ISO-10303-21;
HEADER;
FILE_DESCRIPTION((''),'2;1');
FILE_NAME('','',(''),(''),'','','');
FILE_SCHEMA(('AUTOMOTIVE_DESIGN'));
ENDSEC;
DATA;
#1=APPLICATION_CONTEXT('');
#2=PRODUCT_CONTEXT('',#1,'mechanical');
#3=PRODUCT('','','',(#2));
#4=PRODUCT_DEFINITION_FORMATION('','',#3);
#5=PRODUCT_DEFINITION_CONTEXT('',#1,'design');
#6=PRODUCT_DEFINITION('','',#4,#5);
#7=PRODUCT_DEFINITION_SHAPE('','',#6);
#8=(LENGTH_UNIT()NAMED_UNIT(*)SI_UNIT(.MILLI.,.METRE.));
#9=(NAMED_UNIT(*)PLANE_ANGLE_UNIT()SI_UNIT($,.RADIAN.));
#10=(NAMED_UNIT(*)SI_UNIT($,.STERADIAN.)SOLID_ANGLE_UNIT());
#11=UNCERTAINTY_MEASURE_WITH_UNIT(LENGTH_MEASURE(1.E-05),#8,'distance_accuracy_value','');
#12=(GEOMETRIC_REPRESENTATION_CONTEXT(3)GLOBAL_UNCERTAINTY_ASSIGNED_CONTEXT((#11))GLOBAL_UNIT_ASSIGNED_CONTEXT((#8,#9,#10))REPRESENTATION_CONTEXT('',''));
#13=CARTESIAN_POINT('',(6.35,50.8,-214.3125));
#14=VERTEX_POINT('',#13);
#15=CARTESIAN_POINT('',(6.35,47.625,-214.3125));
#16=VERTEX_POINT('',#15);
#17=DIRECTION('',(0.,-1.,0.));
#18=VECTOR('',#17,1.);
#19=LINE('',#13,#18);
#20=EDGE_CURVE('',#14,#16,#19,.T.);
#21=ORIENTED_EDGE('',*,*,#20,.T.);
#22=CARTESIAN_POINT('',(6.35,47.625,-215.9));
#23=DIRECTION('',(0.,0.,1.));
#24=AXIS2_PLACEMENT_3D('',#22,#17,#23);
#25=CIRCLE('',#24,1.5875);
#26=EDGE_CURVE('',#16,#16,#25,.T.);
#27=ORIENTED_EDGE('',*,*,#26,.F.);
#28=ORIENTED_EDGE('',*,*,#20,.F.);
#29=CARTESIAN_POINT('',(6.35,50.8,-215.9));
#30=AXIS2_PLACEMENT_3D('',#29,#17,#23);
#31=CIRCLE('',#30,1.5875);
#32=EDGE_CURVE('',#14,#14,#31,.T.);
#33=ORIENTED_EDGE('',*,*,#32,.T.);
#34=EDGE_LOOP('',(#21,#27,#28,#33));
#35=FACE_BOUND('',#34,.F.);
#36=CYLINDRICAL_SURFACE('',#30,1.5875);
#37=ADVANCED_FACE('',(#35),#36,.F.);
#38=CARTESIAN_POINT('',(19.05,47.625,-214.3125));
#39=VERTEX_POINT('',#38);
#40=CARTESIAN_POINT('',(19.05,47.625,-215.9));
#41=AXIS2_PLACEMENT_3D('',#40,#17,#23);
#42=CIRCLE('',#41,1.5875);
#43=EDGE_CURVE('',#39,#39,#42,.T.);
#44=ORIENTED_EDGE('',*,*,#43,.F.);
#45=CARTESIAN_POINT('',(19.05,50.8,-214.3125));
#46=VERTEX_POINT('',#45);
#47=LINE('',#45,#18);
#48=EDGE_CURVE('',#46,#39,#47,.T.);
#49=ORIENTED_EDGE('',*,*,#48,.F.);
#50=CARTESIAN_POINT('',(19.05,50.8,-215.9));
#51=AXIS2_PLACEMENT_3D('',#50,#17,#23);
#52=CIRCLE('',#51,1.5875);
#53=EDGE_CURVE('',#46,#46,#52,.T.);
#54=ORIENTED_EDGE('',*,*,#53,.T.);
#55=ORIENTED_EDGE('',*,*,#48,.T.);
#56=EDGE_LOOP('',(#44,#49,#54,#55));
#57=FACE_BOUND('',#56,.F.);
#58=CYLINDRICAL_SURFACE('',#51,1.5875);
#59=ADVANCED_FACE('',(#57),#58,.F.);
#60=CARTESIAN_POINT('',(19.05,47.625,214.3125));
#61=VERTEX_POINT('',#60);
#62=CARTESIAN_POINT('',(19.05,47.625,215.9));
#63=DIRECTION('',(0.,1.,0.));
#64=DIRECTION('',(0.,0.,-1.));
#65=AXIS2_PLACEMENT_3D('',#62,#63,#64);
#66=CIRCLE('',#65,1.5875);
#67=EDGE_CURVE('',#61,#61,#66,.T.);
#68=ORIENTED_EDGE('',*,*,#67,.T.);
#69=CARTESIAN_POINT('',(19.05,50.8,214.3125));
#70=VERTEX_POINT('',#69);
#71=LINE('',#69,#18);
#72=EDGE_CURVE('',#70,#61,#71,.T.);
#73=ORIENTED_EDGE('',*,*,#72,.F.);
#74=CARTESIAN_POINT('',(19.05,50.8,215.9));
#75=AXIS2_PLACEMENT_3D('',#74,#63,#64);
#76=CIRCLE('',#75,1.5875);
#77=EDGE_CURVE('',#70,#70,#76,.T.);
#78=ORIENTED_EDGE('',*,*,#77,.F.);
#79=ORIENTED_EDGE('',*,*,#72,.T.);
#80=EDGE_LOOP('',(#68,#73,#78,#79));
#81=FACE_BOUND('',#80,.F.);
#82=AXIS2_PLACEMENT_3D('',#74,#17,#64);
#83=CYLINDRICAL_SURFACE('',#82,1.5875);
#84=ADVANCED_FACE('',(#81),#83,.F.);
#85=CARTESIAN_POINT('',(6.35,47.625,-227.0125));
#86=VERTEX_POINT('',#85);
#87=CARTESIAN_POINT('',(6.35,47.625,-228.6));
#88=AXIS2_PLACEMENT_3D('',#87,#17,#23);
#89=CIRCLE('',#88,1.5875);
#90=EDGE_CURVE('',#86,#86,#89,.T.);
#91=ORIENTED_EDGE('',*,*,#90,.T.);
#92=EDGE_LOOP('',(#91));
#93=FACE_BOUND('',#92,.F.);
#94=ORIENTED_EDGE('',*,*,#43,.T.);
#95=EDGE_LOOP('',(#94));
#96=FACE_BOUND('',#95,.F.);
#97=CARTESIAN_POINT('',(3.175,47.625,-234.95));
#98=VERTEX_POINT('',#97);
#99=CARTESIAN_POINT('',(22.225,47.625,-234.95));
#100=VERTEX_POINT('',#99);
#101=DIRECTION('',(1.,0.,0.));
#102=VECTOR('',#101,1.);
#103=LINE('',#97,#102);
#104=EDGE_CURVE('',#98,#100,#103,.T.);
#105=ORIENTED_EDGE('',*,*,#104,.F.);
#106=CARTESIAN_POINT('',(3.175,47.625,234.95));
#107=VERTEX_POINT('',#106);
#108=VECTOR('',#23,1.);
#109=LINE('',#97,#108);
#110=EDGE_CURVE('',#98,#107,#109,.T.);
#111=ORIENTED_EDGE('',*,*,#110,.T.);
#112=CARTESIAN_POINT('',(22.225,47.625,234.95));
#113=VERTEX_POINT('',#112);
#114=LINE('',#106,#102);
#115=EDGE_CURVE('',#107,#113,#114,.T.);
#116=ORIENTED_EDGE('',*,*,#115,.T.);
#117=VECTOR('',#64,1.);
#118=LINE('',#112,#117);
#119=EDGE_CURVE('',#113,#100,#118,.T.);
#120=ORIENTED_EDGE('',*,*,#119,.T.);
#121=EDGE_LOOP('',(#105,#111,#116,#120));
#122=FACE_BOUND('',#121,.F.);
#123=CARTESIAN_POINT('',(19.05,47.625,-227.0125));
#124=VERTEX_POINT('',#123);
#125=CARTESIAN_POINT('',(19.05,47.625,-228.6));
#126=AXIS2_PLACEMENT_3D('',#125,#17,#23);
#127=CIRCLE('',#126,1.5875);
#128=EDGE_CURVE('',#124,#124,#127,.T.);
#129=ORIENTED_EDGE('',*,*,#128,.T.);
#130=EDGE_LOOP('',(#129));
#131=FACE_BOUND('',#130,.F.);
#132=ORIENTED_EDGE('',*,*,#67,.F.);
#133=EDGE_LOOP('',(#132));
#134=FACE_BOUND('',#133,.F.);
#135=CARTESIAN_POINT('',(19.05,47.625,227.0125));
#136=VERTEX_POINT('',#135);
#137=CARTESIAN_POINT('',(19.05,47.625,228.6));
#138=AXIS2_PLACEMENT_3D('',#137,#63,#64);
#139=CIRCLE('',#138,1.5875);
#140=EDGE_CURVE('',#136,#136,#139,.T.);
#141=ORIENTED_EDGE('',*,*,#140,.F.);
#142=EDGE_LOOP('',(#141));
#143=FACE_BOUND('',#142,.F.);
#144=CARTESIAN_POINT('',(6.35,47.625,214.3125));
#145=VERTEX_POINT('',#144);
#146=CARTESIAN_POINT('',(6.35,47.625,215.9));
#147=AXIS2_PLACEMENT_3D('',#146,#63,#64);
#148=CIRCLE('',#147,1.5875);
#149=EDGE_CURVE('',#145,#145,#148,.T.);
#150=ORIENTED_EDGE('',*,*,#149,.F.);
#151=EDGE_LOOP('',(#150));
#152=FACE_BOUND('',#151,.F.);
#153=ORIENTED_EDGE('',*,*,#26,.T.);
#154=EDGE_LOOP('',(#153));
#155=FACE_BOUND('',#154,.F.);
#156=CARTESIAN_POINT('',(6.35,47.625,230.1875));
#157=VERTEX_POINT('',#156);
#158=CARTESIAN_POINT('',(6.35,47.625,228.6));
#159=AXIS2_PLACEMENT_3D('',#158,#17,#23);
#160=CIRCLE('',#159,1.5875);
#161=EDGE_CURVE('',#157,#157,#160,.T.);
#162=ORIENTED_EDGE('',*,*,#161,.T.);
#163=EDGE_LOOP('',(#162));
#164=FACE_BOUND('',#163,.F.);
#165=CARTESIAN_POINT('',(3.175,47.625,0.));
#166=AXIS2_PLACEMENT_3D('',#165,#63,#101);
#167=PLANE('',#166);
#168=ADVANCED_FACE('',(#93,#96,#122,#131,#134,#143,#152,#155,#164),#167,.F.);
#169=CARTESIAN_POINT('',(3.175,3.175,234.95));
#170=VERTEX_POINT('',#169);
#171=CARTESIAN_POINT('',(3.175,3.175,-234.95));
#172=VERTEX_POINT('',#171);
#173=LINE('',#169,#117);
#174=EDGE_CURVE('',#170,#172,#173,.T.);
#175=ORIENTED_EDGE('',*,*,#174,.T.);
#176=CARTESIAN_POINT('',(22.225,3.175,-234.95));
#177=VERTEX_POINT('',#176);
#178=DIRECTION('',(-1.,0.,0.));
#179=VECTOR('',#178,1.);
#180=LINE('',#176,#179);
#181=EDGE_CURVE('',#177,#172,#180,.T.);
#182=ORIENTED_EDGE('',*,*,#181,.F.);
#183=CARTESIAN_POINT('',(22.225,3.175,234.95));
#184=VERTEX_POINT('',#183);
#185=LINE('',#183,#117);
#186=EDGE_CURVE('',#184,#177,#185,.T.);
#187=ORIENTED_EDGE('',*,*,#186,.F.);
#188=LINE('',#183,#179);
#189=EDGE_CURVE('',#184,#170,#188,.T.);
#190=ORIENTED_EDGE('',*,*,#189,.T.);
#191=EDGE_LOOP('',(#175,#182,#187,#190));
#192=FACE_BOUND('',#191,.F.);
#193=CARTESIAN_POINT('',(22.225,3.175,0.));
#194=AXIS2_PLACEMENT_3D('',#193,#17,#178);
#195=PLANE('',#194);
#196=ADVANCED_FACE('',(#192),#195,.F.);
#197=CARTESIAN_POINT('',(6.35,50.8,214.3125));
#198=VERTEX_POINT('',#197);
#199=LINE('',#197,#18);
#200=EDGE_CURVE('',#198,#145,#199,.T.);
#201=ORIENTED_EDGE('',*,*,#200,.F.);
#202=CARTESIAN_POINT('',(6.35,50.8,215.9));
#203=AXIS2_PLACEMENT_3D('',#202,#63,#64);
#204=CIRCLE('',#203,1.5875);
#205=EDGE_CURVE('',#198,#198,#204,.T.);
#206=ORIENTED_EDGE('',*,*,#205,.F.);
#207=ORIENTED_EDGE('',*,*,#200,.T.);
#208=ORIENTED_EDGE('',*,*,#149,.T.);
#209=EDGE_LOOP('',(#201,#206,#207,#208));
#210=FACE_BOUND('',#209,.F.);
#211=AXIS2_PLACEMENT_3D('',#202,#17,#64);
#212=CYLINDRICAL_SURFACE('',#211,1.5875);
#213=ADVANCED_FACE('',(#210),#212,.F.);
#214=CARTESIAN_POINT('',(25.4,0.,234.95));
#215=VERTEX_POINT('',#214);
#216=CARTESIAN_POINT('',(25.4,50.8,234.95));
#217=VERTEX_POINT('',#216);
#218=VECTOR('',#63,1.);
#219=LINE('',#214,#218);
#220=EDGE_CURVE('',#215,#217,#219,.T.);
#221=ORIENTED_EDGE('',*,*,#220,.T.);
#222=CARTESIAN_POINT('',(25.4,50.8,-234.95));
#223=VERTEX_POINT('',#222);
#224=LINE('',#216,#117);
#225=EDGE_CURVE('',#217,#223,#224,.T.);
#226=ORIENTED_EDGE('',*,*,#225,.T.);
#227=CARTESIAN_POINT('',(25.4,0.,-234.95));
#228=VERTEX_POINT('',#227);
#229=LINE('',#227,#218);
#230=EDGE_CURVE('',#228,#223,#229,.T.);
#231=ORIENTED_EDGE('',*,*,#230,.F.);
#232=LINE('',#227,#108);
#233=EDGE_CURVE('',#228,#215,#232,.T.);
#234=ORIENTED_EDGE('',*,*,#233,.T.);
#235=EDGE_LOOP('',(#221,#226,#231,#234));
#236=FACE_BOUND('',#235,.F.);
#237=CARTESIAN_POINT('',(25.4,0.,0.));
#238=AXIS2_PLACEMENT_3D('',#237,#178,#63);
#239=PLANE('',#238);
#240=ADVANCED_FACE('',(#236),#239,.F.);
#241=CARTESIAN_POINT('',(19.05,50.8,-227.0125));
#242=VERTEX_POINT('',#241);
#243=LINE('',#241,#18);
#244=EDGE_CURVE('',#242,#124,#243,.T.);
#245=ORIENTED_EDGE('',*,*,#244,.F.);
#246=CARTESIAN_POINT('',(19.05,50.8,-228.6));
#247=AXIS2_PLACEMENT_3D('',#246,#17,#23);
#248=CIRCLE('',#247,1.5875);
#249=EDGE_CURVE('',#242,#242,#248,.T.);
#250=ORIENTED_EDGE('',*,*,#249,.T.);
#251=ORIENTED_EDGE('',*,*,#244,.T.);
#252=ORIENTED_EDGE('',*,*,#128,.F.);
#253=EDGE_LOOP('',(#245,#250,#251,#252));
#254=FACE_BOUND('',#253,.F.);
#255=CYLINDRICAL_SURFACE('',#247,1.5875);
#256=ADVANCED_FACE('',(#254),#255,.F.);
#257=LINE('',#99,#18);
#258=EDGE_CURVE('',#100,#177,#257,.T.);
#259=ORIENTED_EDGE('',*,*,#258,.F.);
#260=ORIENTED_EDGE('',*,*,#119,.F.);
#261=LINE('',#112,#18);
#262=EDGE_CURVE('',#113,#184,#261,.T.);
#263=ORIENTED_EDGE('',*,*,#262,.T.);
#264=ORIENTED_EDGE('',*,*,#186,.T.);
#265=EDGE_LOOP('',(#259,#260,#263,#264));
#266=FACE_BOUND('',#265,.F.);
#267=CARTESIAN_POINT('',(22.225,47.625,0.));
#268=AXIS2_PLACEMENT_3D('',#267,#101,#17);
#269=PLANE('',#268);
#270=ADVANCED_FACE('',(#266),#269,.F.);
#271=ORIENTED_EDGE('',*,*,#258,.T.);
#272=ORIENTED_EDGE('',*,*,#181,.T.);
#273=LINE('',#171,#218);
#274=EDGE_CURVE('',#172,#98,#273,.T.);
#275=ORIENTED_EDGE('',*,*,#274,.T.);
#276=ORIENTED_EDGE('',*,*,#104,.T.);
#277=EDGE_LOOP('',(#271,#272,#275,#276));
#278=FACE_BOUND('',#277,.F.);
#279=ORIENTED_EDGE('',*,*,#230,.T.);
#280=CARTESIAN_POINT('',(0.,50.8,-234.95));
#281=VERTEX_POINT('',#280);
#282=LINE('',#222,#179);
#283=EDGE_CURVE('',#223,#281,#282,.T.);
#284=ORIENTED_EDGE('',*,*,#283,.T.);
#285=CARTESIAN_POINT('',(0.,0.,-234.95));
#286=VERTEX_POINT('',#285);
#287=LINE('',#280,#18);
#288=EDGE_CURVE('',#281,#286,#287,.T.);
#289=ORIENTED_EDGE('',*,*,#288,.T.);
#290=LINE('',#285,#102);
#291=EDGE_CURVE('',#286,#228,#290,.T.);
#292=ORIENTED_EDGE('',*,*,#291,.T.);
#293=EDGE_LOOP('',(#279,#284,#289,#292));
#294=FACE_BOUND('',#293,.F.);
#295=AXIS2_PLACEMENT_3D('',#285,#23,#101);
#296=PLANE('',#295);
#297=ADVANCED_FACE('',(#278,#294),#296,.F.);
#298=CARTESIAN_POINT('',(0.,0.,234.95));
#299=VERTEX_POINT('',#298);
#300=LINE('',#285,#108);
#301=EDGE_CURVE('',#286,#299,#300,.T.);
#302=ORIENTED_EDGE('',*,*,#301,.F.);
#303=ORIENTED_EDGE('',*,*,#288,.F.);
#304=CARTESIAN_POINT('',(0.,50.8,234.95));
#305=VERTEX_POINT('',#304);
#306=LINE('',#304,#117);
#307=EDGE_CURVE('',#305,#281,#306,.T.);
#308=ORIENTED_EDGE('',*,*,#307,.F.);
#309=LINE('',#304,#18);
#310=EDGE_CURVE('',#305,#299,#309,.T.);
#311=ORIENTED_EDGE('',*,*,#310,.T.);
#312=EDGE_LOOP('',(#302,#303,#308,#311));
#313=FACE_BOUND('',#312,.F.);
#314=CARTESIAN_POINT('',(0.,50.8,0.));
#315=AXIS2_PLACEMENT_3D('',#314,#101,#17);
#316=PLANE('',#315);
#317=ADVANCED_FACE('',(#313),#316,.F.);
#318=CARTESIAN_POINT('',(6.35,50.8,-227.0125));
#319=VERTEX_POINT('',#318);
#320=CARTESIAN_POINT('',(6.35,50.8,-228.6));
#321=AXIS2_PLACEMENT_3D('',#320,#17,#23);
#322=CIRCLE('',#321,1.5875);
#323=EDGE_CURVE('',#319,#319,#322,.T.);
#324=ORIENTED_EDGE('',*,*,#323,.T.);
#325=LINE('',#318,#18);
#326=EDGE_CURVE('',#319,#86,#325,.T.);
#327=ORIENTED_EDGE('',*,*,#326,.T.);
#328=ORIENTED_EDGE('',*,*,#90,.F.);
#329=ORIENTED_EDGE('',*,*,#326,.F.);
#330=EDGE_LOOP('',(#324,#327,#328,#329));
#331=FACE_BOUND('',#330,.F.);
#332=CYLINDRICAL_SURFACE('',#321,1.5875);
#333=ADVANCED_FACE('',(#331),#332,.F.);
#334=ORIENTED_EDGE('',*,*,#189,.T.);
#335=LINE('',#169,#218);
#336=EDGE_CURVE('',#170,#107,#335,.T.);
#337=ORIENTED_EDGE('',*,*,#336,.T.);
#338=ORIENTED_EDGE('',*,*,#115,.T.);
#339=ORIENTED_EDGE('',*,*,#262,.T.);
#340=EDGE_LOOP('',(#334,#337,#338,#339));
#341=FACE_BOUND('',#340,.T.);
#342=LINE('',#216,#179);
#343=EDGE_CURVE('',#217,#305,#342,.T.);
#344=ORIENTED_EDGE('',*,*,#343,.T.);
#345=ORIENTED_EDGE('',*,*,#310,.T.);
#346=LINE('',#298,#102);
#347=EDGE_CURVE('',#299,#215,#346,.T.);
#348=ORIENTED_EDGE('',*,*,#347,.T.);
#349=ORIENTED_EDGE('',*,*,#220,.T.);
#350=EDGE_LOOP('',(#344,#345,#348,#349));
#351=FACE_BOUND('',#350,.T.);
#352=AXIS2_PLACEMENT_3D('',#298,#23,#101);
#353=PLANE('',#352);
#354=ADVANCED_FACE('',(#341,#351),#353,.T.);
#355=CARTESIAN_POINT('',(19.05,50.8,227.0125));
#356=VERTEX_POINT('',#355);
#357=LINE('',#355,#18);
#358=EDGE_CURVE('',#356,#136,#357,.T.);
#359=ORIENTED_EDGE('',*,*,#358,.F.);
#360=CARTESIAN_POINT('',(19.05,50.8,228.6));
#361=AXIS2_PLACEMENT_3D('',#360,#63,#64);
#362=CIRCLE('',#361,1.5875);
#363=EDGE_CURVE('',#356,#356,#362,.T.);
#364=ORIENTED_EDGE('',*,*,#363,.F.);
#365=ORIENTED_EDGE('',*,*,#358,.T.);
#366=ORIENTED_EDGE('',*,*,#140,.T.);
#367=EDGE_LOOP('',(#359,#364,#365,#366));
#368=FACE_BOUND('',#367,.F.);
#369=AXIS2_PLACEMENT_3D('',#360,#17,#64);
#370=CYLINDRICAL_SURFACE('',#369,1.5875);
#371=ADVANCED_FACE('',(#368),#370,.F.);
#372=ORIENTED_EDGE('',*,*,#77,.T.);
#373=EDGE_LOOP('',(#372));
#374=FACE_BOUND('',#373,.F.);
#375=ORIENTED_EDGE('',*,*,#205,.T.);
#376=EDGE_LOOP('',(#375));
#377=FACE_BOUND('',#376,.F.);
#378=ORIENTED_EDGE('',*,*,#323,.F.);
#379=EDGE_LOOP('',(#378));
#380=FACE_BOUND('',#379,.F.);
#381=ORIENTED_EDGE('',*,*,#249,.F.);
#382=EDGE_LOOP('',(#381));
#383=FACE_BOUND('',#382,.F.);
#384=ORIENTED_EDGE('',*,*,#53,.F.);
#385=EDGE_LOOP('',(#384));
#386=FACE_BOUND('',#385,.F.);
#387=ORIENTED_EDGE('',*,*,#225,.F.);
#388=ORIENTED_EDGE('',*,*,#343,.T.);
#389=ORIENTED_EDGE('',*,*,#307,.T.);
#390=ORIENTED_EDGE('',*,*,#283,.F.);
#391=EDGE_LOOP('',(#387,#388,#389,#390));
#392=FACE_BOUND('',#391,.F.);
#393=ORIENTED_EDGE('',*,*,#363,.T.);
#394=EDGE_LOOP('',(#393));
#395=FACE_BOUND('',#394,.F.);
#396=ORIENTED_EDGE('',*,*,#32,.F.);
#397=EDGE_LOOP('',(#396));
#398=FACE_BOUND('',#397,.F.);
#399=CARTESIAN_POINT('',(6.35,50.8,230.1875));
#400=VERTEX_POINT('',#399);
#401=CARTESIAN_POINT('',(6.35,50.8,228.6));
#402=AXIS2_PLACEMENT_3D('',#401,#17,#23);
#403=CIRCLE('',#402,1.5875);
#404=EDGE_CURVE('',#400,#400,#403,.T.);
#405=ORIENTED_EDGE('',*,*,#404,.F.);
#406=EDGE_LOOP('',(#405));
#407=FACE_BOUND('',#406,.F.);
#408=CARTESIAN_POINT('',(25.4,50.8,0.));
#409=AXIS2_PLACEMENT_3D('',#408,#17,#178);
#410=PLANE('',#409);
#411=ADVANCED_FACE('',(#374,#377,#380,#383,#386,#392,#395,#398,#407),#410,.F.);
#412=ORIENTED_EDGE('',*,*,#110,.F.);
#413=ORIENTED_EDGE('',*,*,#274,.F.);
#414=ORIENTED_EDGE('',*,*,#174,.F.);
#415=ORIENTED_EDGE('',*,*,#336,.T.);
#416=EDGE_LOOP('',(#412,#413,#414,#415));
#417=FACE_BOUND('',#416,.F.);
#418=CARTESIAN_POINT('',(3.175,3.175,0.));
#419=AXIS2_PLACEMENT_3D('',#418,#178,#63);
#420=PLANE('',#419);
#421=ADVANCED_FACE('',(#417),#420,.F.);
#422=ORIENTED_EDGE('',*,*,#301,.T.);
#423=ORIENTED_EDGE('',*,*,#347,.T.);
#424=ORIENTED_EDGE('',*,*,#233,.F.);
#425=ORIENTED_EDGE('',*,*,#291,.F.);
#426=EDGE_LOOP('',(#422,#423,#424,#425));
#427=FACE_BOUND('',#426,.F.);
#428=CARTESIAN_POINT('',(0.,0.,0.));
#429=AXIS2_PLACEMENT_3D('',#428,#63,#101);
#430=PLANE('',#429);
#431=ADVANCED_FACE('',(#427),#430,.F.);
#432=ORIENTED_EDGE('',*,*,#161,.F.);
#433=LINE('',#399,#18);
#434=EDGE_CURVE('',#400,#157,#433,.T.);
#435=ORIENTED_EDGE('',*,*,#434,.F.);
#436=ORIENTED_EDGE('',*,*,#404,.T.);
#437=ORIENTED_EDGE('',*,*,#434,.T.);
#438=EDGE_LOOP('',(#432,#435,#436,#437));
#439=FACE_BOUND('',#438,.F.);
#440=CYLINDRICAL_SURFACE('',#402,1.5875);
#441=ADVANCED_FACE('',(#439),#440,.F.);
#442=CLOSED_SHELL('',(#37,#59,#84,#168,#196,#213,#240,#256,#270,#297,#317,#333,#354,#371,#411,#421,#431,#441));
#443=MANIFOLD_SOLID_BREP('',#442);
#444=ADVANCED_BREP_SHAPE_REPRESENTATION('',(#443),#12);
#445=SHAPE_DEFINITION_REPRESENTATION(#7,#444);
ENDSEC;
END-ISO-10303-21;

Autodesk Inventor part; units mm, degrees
ref_plane "YZ Plane" through (0, 0, 0) normal (1, 0, 0) x (0, 1, 0)
ref_plane "XZ Plane" through (0, 0, 0) normal (0, 1, 0) x (-1, 0, 0)
ref_plane "XY Plane" through (0, 0, 0) normal (0, 0, 1) x (1, 0, 0)
sketch "Sketch1" plane through (0, 0, 0) normal (0, 0, 1) x (1, 0, 0)
  line L0 (0, 0) -> (25.4, 0)
  line L1 (25.4, 0) -> (25.4, 50.8)
  line L2 (25.4, 50.8) -> (0, 50.8)
  line L3 (0, 50.8) -> (0, 0)
  line L4 (3.175, 47.625) -> (22.225, 47.625)
  line L5 (22.225, 47.625) -> (22.225, 3.175)
  line L6 (22.225, 3.175) -> (3.175, 3.175)
  line L7 (3.175, 3.175) -> (3.175, 47.625)
  dimension "d0" = 25.4
  dimension "d1" = 50.8
  dimension "d2" = 3.175
extrude "Beam" add sketch "Sketch1" along normal mid plane 469.9
sketch "Sketch2" plane through (0, 50.8, -234.95) normal (0, 1, 0) x (1, 0, 0)
  line L0 (0, 0) -> (25.4, 0) projected
  line L1 (0, 0) -> (0, -469.9) projected
  point P0 (6.35, -6.35)
  dimension "d5" = 6.35
  dimension "d6" = 6.35
hole "Rivet Hole" at (6.35, 50.8, -228.6) direction (0, -1, 0) diameter 3.175 end up to surface
pattern_linear "Rivet Holes" count 2 spacing 12.7 along (1, 0, 0) count 2 spacing 12.7 along (0, 0, 1) of "Rivet Hole"
mirror "Rivet Holes Mirrored" about plane through (0, 0, 0) normal (0, 0, 1) of "Rivet Hole", "Rivet Holes"
properties part number "Back Beam"
